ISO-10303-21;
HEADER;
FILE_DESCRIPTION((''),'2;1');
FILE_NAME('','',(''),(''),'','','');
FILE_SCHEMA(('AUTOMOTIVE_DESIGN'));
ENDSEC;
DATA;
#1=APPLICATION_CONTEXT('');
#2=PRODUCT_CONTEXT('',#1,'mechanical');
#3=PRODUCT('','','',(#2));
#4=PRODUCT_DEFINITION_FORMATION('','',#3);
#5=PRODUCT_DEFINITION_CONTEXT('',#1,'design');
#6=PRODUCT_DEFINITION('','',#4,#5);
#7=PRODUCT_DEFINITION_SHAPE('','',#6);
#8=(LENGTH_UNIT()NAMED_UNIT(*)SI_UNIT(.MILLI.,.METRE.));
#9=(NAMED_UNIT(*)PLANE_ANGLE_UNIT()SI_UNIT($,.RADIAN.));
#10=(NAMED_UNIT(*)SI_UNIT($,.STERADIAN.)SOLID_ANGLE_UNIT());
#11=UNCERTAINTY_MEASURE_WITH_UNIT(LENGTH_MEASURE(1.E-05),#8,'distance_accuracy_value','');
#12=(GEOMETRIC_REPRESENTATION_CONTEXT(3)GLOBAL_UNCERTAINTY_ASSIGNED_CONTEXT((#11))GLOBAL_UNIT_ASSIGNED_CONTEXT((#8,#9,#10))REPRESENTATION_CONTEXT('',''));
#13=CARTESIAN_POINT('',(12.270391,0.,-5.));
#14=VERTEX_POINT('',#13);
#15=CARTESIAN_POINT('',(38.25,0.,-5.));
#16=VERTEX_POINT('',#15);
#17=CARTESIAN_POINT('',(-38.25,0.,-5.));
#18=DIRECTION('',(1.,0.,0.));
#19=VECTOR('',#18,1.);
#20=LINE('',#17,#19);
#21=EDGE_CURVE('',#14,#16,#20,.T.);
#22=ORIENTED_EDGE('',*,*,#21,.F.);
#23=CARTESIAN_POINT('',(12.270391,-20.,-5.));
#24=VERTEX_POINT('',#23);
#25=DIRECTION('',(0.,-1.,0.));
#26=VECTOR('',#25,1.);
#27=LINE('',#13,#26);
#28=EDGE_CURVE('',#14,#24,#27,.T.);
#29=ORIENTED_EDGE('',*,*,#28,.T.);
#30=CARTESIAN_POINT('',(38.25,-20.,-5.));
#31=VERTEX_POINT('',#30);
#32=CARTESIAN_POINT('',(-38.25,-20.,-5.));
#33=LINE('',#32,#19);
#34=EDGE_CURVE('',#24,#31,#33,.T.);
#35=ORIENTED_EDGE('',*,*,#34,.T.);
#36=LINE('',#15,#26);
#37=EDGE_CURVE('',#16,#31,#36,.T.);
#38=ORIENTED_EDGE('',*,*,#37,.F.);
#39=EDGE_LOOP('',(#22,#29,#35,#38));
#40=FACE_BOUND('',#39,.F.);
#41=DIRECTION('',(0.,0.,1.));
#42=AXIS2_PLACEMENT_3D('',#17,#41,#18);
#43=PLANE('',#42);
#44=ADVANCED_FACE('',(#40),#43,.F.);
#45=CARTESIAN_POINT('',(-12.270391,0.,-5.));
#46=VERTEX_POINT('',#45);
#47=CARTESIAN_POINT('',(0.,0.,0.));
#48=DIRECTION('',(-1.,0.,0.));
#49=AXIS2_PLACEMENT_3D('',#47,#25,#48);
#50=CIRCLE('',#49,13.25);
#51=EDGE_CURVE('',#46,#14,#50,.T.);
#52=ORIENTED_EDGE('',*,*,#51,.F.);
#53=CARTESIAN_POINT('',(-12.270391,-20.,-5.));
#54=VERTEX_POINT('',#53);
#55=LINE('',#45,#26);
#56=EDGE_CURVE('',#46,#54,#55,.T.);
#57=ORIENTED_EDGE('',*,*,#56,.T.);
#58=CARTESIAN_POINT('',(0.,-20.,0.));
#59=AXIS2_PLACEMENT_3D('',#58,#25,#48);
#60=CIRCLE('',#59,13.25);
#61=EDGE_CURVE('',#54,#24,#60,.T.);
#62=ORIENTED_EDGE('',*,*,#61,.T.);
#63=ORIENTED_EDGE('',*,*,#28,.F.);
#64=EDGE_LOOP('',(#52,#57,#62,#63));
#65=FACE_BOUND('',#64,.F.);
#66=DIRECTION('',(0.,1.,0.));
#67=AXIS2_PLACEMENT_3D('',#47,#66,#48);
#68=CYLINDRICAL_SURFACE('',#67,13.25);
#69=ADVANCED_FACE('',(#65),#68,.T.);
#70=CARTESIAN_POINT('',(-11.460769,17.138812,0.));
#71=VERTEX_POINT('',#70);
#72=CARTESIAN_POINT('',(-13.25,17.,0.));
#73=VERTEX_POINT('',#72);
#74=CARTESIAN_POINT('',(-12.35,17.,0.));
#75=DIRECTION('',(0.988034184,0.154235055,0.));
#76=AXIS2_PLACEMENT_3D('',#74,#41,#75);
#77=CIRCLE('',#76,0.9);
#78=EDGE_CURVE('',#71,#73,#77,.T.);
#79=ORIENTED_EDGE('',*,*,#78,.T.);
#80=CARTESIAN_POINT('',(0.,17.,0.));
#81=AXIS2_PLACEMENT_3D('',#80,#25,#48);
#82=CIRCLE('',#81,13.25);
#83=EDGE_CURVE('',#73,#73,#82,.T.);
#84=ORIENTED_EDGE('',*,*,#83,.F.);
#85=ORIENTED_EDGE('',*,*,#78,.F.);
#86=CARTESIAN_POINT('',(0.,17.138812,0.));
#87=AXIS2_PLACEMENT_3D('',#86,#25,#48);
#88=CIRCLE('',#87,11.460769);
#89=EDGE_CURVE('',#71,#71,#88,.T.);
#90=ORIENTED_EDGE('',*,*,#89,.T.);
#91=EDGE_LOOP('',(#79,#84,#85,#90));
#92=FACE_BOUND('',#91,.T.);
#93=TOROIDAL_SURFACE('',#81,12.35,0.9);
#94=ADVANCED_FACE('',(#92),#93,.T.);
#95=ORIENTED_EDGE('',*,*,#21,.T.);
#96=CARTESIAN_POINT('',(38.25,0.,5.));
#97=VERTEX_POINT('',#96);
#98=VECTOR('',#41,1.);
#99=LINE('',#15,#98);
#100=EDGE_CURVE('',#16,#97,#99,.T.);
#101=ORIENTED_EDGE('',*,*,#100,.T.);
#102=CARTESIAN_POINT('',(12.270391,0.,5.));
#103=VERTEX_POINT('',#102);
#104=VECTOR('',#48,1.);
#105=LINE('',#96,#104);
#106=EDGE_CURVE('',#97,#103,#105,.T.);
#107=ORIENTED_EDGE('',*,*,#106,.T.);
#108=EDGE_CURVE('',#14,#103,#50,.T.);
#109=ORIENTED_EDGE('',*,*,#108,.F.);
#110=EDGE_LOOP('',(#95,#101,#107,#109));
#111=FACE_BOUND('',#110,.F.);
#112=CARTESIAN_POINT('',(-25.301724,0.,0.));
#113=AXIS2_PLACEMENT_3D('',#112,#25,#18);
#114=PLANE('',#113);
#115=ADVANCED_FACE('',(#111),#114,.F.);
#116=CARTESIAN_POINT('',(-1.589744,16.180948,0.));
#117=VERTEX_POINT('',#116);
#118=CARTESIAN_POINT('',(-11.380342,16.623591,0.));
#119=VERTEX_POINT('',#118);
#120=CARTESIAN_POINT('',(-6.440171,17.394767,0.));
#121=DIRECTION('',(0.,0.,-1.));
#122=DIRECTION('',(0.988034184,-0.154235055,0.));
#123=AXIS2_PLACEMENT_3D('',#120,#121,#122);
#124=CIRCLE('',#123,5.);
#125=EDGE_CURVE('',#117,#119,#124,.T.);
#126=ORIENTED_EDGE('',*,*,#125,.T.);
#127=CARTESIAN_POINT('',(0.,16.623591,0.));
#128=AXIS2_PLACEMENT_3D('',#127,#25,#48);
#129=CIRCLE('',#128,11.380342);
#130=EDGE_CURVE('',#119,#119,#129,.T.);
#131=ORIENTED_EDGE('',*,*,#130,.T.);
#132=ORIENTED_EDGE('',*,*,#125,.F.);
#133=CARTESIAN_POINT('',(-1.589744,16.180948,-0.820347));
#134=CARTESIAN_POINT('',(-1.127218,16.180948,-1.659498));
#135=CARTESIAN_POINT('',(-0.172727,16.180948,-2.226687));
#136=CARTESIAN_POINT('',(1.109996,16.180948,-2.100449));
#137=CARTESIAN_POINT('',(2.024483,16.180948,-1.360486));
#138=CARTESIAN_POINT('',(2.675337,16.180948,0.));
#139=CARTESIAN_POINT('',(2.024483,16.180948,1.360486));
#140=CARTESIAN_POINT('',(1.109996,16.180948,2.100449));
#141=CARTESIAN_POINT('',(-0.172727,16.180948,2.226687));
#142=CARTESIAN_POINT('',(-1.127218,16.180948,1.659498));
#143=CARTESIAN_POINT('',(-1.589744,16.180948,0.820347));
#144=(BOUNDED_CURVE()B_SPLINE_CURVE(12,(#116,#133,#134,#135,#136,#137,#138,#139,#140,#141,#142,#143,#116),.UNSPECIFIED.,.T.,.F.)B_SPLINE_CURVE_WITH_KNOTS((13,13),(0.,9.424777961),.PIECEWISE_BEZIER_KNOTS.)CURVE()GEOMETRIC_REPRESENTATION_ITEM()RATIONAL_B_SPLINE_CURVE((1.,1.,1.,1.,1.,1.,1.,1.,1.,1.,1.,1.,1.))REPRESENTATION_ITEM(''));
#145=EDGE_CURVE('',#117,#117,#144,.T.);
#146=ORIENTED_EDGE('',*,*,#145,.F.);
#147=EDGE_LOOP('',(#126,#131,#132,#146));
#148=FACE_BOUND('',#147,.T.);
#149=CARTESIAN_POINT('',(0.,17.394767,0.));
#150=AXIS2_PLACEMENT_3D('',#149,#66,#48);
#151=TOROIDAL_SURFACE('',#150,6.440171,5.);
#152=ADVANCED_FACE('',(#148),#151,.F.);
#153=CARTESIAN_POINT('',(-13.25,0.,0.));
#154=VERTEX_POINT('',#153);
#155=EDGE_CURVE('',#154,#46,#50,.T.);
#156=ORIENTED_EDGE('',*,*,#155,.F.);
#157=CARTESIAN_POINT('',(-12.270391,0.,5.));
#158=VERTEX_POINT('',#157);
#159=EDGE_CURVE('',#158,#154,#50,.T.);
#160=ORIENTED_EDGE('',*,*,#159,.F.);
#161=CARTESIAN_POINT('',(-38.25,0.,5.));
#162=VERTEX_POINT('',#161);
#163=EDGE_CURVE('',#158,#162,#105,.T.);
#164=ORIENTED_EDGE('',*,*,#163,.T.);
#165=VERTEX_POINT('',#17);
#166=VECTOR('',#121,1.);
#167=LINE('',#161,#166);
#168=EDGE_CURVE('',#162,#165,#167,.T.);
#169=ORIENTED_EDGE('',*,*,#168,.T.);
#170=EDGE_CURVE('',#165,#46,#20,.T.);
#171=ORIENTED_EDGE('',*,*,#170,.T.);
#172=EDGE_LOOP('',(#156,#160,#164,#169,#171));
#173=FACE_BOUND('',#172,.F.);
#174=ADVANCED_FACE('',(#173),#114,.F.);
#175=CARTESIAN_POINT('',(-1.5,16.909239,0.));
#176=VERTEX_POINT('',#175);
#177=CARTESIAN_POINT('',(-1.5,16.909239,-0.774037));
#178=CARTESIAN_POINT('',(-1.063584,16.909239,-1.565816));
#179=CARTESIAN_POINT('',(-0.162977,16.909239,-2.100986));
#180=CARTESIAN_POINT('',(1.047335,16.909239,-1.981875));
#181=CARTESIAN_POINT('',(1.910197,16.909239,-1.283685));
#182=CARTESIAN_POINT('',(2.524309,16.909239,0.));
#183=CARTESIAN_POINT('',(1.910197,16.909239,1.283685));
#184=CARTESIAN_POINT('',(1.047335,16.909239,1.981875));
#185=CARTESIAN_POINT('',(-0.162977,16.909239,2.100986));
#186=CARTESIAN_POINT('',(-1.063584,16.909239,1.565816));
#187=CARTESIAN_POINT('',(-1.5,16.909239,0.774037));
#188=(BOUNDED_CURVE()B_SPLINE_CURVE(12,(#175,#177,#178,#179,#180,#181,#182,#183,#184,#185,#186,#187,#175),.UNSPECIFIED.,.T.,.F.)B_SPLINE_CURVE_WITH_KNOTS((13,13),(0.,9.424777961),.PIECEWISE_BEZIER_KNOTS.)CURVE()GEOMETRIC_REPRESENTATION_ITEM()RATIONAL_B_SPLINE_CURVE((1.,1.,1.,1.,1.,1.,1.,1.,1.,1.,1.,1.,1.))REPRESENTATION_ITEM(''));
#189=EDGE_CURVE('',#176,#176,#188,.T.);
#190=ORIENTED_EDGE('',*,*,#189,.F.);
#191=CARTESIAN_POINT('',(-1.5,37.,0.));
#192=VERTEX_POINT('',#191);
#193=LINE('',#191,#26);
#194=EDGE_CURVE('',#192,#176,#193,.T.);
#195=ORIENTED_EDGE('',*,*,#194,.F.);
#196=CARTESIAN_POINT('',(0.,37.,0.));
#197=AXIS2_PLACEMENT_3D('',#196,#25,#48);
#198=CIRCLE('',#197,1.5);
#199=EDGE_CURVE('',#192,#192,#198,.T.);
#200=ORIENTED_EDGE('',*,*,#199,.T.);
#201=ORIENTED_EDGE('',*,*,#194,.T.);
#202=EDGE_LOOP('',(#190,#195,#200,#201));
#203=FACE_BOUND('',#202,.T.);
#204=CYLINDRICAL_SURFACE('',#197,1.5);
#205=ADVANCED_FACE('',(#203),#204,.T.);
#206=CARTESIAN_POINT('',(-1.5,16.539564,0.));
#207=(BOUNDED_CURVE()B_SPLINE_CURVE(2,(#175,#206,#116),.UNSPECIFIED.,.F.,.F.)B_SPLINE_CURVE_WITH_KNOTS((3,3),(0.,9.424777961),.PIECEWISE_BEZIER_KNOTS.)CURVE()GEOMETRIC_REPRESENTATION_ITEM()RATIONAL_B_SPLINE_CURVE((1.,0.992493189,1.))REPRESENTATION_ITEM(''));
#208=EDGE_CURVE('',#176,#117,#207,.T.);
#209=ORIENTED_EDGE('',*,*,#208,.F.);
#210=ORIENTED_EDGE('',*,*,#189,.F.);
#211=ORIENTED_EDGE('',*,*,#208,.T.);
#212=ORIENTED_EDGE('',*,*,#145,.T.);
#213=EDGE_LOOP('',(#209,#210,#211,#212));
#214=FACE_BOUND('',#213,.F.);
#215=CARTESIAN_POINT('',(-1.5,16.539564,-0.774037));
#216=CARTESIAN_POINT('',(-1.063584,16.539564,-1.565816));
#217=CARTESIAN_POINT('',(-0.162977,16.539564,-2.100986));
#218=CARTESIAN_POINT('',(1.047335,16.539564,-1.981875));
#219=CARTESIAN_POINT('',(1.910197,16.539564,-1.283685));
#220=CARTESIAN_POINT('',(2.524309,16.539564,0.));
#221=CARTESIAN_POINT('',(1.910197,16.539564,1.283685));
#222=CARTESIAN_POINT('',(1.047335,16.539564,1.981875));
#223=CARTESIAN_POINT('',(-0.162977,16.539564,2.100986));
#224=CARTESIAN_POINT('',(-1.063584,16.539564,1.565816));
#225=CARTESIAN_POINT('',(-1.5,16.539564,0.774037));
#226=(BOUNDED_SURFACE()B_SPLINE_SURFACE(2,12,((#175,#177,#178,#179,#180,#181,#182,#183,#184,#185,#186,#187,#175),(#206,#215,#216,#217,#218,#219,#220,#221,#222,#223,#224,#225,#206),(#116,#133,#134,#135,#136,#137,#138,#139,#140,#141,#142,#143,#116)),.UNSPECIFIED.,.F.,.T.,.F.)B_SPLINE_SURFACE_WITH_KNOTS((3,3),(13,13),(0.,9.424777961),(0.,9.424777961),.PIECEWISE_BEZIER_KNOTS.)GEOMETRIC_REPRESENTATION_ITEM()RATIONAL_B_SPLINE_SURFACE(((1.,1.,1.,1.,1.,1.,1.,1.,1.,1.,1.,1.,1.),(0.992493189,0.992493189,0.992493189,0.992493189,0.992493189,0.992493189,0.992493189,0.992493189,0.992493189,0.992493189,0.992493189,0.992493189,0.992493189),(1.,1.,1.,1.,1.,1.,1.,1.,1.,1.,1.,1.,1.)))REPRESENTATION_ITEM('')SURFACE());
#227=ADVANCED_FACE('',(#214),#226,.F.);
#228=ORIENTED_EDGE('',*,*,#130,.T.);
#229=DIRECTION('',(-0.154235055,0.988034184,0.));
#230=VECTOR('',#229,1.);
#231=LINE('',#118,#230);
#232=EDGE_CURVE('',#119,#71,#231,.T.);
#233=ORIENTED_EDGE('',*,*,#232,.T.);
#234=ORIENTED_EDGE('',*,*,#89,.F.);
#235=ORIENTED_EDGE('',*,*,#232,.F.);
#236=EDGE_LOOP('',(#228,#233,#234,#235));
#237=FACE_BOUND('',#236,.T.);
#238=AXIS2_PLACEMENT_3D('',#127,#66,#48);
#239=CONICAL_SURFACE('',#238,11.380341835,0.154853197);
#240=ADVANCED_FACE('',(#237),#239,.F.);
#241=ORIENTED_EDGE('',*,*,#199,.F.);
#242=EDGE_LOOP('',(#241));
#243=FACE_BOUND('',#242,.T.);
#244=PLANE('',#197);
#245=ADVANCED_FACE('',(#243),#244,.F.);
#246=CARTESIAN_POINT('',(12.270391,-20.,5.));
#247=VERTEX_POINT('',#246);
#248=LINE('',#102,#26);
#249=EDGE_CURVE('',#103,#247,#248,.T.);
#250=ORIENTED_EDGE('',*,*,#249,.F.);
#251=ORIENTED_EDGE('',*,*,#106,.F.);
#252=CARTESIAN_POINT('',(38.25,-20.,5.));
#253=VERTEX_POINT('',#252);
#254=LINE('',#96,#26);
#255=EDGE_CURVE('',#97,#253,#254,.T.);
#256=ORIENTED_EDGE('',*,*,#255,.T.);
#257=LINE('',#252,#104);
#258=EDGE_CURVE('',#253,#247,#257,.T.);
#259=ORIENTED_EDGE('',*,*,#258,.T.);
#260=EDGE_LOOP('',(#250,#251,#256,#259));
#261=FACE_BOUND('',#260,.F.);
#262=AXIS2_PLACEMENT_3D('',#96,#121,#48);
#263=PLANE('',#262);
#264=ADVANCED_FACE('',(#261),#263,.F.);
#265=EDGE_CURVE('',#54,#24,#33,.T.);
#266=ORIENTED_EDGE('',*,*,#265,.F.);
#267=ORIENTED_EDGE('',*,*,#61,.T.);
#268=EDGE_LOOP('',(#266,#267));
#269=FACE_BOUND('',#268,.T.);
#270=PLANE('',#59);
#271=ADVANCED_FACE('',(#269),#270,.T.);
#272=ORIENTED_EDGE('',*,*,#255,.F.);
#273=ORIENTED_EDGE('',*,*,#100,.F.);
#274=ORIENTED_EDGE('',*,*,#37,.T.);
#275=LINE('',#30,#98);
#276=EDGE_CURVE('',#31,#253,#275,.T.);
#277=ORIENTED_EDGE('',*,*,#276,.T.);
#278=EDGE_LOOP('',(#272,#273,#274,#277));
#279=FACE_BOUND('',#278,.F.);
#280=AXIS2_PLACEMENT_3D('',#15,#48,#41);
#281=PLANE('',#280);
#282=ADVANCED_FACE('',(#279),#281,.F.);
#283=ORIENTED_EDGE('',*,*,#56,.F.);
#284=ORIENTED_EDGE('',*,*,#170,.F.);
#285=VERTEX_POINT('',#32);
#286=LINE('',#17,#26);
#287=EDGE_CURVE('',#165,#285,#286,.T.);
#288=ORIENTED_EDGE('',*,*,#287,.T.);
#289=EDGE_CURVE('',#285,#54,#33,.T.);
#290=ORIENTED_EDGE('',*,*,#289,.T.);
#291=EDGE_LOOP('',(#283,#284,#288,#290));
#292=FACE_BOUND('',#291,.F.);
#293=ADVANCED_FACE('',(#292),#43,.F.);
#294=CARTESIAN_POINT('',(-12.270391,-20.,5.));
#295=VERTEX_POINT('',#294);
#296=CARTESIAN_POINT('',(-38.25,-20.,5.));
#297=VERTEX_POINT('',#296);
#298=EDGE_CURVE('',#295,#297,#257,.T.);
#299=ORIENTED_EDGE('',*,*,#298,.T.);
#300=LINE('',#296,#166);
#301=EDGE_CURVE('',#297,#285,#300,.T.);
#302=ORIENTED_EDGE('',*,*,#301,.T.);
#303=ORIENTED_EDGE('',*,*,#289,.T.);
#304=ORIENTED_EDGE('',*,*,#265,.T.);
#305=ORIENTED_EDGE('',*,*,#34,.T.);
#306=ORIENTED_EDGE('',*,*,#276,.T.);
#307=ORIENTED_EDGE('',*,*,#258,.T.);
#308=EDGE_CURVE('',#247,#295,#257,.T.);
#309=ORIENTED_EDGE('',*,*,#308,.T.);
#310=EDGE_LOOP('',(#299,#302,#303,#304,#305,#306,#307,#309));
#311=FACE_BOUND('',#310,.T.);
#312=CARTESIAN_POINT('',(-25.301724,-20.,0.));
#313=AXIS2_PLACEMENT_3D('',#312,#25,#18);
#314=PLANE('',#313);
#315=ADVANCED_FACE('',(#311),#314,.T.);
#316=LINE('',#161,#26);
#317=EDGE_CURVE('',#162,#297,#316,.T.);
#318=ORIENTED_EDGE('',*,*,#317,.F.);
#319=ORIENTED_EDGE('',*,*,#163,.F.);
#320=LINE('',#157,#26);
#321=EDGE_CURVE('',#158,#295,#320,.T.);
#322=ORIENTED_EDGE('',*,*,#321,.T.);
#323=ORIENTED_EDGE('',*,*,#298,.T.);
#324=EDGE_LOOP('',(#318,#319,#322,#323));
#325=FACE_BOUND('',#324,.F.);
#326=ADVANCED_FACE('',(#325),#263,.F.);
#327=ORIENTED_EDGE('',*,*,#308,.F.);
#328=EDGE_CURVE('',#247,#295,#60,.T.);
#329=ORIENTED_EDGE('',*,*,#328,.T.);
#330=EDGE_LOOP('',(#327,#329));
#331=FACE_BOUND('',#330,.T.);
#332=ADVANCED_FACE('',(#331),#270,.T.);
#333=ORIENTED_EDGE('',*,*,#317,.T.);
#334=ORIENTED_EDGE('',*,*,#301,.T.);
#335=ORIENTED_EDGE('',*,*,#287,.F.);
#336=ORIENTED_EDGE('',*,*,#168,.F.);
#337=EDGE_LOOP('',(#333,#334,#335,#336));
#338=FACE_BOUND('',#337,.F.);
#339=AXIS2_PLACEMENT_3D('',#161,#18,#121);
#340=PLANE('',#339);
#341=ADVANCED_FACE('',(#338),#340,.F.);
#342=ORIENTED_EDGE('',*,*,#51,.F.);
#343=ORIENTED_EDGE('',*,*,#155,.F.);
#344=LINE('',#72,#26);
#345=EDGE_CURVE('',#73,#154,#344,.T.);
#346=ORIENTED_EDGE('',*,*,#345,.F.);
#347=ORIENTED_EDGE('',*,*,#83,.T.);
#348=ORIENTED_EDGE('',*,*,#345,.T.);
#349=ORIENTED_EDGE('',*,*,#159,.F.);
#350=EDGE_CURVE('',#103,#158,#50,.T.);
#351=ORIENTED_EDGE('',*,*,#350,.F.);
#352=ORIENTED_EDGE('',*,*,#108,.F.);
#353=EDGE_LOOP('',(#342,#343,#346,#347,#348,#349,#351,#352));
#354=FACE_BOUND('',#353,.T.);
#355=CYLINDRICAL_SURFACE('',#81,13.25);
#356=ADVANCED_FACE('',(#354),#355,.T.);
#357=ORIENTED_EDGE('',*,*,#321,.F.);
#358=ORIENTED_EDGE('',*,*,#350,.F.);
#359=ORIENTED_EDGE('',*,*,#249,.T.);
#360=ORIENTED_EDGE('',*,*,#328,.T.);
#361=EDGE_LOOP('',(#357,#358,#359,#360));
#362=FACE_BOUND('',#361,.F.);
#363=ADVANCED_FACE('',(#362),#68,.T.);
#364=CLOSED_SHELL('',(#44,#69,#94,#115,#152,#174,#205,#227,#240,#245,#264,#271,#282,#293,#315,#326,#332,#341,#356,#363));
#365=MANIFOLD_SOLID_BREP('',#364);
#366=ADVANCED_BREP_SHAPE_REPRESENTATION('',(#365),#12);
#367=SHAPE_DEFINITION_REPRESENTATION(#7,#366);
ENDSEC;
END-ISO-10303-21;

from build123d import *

# Parameters (mm, degrees)
F2_R     = 3
F4_DEPTH = 20
F5_DEPTH = 20


with BuildPart() as f1:
    # F0 (on Top) → F1 (revolve)
    with BuildSketch(Plane.XY):
        with BuildLine():
            Line((-13.25, 0), (0, 0))
            Line((0, 0), (0, 37))
            Line((0, 37), (-1.5, 37))
            Line((-1.5, 37), (-1.5, 16.6235913226))
            ThreePointArc((-1.5, 16.6235913226), (-6.4401709177, 12.3947665973), (-11.3803418353, 16.6235913226))
            Line((-11.3803418353, 16.6235913226), (-11.4607692348, 17.1388115494))
            ThreePointArc((-11.4607692348, 17.1388115494), (-12.4196143352, 17.8973036522), (-13.25, 17))
            Line((-13.25, 17), (-13.25, 0))
        make_face()
    revolve(axis=Axis((0, 18.5, 0), (0, -1, 0)))

    # F2
    f2_edges = [f1.edges().sort_by_distance(p)[0] for p in [
        (1.5, 16.623591, 0),
    ]]
    fillet(f2_edges, radius=F2_R)

    # F3 (on face) → F4 (join)
    with BuildSketch(Plane.XZ):
        with BuildLine():
            Line((-12.2703911918, 5), (-38.25, 5))
            Line((-38.25, 5), (-38.25, -5))
            Line((-38.25, -5), (-12.2703911918, -5))
            ThreePointArc((-12.2703911918, -5), (-13.25, 0), (-12.2703911918, 5))
        make_face()
        with BuildLine():
            Line((12.2703911918, 5), (-12.2703911918, 5))
            ThreePointArc((-12.2703911918, 5), (-13.25, 0), (-12.2703911918, -5))
            Line((-12.2703911918, -5), (12.2703911918, -5))
            ThreePointArc((12.2703911918, -5), (13.0027916866, -2.5475298535), (13.25, 0))
            ThreePointArc((13.25, 0), (13.0027916866, 2.5475298535), (12.2703911918, 5))
        make_face()
        with BuildLine():
            Line((38.25, 5), (12.2703911918, 5))
            ThreePointArc((12.2703911918, 5), (13.0027916866, 2.5475298535), (13.25, 0))
            ThreePointArc((13.25, 0), (13.0027916866, -2.5475298535), (12.2703911918, -5))
            Line((12.2703911918, -5), (38.25, -5))
            Line((38.25, -5), (38.25, 5))
        make_face()
    extrude(amount=F4_DEPTH)

    # F5 (add): faces of the model
    f5_faces = [f1.faces().sort_by_distance(p)[0] for p in [
        (0, 0, 8.4077666552),
        (0, 0, -8.4077666552),
    ]]
    extrude(f5_faces, amount=F5_DEPTH)


solid = f1.part
